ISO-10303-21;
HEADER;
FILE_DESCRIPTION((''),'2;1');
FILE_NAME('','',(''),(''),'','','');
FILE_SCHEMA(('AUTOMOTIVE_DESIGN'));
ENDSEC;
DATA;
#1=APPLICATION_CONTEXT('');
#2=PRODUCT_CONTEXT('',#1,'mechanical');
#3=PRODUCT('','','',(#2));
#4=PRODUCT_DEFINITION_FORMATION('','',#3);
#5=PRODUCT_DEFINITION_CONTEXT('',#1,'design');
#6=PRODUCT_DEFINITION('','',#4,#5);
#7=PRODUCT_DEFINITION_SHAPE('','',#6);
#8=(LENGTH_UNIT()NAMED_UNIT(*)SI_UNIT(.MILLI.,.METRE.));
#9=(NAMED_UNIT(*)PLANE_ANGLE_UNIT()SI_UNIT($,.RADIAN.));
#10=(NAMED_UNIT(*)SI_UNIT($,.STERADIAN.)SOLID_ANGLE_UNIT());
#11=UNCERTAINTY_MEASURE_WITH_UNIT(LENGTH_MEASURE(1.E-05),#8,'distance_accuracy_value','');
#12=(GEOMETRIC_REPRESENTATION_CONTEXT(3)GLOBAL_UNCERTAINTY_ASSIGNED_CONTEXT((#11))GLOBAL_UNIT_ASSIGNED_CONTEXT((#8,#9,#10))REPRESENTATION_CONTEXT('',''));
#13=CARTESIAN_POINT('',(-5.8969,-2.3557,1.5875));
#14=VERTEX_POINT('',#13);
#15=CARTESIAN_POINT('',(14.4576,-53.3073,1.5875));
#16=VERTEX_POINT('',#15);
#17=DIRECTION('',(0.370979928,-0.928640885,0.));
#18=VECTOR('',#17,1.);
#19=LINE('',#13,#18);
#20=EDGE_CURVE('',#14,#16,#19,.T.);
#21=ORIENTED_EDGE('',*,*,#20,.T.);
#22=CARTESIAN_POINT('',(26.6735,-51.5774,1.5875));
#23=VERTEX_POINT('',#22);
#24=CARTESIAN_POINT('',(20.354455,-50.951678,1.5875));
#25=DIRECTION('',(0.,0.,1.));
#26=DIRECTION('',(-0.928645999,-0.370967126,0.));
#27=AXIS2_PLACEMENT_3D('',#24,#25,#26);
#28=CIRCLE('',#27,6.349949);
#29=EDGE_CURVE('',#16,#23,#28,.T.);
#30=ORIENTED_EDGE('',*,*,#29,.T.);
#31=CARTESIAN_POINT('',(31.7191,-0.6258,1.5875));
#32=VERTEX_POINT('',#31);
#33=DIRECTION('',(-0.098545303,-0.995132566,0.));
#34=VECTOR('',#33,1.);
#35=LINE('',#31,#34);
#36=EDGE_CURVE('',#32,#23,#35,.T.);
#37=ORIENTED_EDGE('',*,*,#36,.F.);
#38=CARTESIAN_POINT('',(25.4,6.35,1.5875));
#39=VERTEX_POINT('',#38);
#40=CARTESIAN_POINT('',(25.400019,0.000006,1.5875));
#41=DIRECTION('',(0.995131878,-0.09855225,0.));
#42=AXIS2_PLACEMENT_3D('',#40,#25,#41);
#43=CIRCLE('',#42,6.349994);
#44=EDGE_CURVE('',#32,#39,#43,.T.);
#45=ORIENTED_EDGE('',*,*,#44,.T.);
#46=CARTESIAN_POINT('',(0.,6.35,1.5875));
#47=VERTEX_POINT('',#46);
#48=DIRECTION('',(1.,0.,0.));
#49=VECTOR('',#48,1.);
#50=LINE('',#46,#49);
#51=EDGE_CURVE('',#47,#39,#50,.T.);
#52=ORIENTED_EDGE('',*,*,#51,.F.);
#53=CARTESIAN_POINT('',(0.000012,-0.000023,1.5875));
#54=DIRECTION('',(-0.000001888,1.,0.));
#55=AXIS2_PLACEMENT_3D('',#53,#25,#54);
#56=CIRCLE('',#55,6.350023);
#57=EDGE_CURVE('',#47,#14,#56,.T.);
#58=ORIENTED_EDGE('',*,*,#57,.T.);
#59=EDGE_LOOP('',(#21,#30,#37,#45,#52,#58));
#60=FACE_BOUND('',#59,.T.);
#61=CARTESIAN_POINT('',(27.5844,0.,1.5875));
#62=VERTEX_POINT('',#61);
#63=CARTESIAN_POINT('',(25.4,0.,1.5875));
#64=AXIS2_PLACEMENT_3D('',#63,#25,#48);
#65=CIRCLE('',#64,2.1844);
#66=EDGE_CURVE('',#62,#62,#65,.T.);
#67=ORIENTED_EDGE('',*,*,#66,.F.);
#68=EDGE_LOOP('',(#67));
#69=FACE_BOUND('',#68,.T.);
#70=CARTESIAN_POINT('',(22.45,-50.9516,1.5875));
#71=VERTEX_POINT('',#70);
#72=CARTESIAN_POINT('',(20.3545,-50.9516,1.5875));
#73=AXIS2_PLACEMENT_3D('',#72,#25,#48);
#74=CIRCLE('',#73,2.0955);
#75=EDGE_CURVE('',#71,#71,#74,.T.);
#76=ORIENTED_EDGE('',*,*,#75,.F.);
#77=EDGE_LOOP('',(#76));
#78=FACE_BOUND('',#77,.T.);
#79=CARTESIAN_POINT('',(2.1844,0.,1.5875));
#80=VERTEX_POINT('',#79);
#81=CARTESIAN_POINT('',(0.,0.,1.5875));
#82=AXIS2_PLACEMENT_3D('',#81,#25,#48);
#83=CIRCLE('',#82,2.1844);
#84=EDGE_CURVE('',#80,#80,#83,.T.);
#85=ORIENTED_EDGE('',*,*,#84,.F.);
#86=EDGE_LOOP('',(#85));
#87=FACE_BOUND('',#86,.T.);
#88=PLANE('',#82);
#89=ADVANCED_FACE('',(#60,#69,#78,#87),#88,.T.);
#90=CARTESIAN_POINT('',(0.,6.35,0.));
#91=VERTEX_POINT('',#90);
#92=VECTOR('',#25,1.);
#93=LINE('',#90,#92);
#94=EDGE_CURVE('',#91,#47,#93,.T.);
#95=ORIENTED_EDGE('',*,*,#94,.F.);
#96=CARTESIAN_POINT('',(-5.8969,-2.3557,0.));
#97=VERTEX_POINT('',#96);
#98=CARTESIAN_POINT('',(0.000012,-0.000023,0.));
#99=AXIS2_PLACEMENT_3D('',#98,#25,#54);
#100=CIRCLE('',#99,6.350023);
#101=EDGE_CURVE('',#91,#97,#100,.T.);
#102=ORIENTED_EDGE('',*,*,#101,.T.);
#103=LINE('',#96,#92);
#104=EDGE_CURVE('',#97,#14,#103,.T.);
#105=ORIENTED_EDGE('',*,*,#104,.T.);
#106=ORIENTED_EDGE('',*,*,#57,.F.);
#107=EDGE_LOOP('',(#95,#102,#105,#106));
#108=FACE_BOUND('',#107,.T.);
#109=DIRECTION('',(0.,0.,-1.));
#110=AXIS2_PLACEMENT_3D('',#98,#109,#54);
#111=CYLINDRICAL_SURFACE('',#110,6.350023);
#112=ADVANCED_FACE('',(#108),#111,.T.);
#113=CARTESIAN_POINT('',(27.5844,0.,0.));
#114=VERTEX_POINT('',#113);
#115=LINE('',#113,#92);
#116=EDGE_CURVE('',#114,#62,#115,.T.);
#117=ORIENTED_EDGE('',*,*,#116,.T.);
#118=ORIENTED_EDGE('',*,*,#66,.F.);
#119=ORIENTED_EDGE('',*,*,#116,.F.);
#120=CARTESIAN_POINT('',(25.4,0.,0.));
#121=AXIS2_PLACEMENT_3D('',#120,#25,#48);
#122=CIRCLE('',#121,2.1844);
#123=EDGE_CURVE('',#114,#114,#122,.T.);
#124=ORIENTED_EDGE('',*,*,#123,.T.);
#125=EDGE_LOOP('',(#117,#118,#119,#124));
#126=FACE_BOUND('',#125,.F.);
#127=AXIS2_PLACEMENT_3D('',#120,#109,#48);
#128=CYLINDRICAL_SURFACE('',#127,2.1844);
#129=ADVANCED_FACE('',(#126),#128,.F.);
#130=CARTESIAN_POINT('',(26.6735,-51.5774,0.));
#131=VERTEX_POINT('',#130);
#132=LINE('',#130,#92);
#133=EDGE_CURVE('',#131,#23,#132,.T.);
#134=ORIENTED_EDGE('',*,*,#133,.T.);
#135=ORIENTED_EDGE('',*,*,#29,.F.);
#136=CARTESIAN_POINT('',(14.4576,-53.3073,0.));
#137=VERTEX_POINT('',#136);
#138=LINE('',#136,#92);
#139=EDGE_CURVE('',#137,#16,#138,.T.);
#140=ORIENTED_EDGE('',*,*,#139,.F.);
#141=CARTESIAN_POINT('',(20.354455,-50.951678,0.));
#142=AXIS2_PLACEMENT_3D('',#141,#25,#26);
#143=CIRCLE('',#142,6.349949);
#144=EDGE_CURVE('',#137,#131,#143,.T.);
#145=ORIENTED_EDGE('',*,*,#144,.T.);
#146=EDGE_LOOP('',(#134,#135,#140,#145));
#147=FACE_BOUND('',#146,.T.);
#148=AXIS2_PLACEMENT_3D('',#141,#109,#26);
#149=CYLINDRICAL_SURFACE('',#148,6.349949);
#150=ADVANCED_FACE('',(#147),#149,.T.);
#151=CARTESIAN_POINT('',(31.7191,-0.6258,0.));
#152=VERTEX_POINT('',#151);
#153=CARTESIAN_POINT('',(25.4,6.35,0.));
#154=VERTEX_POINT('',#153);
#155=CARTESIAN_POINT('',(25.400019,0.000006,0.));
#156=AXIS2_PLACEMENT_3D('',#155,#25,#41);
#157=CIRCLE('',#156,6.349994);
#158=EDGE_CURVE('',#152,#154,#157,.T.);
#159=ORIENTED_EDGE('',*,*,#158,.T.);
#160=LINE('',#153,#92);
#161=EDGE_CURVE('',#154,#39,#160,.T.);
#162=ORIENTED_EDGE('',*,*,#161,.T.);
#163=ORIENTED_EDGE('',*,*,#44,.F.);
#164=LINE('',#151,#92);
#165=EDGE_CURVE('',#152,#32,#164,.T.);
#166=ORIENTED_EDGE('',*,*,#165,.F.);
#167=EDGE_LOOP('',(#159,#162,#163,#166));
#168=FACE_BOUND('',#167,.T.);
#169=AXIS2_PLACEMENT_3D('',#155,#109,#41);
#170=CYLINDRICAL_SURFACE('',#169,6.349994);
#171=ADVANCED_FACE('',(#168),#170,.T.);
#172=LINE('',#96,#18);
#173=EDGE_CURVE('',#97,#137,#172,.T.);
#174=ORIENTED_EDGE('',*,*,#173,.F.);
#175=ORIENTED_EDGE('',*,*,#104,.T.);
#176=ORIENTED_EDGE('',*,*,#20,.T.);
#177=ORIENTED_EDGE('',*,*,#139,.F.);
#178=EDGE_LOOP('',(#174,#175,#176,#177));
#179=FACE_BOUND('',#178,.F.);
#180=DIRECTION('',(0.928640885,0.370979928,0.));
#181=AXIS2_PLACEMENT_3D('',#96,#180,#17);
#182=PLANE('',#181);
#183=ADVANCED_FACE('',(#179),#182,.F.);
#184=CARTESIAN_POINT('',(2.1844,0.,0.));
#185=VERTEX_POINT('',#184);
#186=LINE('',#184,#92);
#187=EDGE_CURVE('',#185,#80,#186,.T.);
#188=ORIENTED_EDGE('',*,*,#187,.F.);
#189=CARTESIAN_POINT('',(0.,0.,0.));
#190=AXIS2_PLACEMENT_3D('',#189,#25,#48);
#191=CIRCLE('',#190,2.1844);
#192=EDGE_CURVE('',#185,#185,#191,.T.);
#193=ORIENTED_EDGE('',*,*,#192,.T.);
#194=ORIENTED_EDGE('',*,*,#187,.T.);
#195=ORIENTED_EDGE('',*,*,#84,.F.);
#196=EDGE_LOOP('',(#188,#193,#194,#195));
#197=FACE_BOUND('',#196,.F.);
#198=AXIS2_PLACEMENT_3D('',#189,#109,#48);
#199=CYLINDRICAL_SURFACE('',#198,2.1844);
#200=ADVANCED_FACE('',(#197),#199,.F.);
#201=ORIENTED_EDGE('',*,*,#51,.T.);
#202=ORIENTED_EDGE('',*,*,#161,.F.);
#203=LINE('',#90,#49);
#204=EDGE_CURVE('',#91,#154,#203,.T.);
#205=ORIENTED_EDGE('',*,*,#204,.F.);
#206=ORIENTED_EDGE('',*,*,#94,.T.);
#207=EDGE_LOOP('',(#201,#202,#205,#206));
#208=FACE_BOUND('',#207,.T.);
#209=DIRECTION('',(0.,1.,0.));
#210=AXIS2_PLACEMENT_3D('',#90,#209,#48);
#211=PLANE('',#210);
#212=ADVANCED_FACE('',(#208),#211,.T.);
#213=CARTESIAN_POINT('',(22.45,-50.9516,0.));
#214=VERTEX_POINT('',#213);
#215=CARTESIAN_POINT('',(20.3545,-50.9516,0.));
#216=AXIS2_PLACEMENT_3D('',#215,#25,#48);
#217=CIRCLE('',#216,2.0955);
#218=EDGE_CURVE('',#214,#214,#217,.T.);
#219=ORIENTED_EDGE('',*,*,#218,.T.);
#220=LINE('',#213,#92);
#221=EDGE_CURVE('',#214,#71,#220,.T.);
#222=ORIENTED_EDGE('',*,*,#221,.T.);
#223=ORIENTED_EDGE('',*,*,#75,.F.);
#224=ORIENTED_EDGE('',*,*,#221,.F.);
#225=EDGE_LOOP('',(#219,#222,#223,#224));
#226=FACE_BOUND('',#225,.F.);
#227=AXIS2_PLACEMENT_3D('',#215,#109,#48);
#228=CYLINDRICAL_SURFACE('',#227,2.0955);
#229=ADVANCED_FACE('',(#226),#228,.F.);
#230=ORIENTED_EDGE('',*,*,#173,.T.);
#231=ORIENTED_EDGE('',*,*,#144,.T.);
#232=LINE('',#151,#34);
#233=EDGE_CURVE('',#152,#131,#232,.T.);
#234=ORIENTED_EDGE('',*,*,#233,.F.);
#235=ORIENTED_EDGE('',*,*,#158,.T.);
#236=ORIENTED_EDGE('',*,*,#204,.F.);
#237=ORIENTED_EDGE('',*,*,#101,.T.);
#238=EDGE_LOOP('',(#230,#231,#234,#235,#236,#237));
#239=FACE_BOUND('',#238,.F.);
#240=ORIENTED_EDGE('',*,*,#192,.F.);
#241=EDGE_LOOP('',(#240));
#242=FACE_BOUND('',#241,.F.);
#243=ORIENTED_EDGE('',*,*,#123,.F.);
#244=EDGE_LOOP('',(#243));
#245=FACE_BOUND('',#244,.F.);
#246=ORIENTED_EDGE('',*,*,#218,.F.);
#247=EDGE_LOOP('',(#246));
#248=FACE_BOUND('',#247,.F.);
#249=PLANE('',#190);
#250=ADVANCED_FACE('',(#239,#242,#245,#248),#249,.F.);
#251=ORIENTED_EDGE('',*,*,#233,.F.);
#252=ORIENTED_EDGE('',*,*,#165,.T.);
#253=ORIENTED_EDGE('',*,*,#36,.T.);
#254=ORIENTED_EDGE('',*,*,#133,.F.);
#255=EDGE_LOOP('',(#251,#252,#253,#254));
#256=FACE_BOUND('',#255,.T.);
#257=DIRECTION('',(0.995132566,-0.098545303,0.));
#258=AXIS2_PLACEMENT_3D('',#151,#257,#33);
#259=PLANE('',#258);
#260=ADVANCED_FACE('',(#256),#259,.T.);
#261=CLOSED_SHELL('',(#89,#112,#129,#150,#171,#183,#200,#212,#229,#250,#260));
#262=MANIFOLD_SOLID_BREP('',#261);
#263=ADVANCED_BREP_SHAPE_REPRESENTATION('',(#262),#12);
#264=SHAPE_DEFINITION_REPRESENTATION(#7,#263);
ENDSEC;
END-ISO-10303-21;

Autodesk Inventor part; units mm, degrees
ref_plane "YZ Plane" through (0, 0, 0) normal (1, 0, 0) x (0, 1, 0)
ref_plane "XZ Plane" through (0, 0, 0) normal (0, 1, 0) x (-1, 0, 0)
ref_plane "XY Plane" through (0, 0, 0) normal (0, 0, 1) x (1, 0, 0)
sketch "main" plane through (0, 0, 0) normal (0, 0, 1) x (1, 0, 0)
  circle A0 centre (11.6396, 18.419) radius 2.1844
  circle A1 centre (-13.7604, 18.419) radius 2.1844
  arc A2 (-13.7604, 24.769) -> (-19.6572, 16.0633) centre (-13.7604, 18.419) ccw
  arc A3 (17.9587, 17.7933) -> (11.6396, 24.769) centre (11.6396, 18.419) ccw
  line L0 (-19.6572, 16.0633) -> (0.6972, -34.8883)
  line L1 (17.9587, 17.7933) -> (12.9132, -33.1583)
  line L2 (-13.7604, 24.769) -> (11.6396, 24.769)
  circle A4 centre (6.5941, -32.5326) radius 2.0955
  arc A5 (0.6972, -34.8883) -> (12.9132, -33.1583) centre (6.5941, -32.5326) ccw
  point P0 (1.7688, 7.28)
  dimension "d0" = 12.7
  dimension "d1" = 12.7
  dimension "d2" = 12.7
  dimension "d5" = 4.191
sketch "Sketch1" plane through (0, 0, 0) normal (0, 0, 1) x (1, 0, 0)
  circle A0 centre (25.4, 0) radius 2.1844
  circle A1 centre (0, 0) radius 2.1844
  arc A2 (0, 6.35) -> (-5.8969, -2.3557) centre (0, 0) ccw
  arc A3 (31.7191, -0.6258) -> (25.4, 6.35) centre (25.4, 0) ccw
  line L0 (-5.8969, -2.3557) -> (14.4576, -53.3073)
  line L1 (31.7191, -0.6258) -> (26.6735, -51.5774)
  line L2 (0, 6.35) -> (25.4, 6.35)
  circle A4 centre (20.3545, -50.9516) radius 2.0955
  arc A5 (14.4576, -53.3073) -> (26.6735, -51.5774) centre (20.3545, -50.9516) ccw
extrude "Extrusion1" add sketch "Sketch1" along normal blind 1.5875
properties part number "vertical_wing_gusset" material "Acetal Resin, White"
